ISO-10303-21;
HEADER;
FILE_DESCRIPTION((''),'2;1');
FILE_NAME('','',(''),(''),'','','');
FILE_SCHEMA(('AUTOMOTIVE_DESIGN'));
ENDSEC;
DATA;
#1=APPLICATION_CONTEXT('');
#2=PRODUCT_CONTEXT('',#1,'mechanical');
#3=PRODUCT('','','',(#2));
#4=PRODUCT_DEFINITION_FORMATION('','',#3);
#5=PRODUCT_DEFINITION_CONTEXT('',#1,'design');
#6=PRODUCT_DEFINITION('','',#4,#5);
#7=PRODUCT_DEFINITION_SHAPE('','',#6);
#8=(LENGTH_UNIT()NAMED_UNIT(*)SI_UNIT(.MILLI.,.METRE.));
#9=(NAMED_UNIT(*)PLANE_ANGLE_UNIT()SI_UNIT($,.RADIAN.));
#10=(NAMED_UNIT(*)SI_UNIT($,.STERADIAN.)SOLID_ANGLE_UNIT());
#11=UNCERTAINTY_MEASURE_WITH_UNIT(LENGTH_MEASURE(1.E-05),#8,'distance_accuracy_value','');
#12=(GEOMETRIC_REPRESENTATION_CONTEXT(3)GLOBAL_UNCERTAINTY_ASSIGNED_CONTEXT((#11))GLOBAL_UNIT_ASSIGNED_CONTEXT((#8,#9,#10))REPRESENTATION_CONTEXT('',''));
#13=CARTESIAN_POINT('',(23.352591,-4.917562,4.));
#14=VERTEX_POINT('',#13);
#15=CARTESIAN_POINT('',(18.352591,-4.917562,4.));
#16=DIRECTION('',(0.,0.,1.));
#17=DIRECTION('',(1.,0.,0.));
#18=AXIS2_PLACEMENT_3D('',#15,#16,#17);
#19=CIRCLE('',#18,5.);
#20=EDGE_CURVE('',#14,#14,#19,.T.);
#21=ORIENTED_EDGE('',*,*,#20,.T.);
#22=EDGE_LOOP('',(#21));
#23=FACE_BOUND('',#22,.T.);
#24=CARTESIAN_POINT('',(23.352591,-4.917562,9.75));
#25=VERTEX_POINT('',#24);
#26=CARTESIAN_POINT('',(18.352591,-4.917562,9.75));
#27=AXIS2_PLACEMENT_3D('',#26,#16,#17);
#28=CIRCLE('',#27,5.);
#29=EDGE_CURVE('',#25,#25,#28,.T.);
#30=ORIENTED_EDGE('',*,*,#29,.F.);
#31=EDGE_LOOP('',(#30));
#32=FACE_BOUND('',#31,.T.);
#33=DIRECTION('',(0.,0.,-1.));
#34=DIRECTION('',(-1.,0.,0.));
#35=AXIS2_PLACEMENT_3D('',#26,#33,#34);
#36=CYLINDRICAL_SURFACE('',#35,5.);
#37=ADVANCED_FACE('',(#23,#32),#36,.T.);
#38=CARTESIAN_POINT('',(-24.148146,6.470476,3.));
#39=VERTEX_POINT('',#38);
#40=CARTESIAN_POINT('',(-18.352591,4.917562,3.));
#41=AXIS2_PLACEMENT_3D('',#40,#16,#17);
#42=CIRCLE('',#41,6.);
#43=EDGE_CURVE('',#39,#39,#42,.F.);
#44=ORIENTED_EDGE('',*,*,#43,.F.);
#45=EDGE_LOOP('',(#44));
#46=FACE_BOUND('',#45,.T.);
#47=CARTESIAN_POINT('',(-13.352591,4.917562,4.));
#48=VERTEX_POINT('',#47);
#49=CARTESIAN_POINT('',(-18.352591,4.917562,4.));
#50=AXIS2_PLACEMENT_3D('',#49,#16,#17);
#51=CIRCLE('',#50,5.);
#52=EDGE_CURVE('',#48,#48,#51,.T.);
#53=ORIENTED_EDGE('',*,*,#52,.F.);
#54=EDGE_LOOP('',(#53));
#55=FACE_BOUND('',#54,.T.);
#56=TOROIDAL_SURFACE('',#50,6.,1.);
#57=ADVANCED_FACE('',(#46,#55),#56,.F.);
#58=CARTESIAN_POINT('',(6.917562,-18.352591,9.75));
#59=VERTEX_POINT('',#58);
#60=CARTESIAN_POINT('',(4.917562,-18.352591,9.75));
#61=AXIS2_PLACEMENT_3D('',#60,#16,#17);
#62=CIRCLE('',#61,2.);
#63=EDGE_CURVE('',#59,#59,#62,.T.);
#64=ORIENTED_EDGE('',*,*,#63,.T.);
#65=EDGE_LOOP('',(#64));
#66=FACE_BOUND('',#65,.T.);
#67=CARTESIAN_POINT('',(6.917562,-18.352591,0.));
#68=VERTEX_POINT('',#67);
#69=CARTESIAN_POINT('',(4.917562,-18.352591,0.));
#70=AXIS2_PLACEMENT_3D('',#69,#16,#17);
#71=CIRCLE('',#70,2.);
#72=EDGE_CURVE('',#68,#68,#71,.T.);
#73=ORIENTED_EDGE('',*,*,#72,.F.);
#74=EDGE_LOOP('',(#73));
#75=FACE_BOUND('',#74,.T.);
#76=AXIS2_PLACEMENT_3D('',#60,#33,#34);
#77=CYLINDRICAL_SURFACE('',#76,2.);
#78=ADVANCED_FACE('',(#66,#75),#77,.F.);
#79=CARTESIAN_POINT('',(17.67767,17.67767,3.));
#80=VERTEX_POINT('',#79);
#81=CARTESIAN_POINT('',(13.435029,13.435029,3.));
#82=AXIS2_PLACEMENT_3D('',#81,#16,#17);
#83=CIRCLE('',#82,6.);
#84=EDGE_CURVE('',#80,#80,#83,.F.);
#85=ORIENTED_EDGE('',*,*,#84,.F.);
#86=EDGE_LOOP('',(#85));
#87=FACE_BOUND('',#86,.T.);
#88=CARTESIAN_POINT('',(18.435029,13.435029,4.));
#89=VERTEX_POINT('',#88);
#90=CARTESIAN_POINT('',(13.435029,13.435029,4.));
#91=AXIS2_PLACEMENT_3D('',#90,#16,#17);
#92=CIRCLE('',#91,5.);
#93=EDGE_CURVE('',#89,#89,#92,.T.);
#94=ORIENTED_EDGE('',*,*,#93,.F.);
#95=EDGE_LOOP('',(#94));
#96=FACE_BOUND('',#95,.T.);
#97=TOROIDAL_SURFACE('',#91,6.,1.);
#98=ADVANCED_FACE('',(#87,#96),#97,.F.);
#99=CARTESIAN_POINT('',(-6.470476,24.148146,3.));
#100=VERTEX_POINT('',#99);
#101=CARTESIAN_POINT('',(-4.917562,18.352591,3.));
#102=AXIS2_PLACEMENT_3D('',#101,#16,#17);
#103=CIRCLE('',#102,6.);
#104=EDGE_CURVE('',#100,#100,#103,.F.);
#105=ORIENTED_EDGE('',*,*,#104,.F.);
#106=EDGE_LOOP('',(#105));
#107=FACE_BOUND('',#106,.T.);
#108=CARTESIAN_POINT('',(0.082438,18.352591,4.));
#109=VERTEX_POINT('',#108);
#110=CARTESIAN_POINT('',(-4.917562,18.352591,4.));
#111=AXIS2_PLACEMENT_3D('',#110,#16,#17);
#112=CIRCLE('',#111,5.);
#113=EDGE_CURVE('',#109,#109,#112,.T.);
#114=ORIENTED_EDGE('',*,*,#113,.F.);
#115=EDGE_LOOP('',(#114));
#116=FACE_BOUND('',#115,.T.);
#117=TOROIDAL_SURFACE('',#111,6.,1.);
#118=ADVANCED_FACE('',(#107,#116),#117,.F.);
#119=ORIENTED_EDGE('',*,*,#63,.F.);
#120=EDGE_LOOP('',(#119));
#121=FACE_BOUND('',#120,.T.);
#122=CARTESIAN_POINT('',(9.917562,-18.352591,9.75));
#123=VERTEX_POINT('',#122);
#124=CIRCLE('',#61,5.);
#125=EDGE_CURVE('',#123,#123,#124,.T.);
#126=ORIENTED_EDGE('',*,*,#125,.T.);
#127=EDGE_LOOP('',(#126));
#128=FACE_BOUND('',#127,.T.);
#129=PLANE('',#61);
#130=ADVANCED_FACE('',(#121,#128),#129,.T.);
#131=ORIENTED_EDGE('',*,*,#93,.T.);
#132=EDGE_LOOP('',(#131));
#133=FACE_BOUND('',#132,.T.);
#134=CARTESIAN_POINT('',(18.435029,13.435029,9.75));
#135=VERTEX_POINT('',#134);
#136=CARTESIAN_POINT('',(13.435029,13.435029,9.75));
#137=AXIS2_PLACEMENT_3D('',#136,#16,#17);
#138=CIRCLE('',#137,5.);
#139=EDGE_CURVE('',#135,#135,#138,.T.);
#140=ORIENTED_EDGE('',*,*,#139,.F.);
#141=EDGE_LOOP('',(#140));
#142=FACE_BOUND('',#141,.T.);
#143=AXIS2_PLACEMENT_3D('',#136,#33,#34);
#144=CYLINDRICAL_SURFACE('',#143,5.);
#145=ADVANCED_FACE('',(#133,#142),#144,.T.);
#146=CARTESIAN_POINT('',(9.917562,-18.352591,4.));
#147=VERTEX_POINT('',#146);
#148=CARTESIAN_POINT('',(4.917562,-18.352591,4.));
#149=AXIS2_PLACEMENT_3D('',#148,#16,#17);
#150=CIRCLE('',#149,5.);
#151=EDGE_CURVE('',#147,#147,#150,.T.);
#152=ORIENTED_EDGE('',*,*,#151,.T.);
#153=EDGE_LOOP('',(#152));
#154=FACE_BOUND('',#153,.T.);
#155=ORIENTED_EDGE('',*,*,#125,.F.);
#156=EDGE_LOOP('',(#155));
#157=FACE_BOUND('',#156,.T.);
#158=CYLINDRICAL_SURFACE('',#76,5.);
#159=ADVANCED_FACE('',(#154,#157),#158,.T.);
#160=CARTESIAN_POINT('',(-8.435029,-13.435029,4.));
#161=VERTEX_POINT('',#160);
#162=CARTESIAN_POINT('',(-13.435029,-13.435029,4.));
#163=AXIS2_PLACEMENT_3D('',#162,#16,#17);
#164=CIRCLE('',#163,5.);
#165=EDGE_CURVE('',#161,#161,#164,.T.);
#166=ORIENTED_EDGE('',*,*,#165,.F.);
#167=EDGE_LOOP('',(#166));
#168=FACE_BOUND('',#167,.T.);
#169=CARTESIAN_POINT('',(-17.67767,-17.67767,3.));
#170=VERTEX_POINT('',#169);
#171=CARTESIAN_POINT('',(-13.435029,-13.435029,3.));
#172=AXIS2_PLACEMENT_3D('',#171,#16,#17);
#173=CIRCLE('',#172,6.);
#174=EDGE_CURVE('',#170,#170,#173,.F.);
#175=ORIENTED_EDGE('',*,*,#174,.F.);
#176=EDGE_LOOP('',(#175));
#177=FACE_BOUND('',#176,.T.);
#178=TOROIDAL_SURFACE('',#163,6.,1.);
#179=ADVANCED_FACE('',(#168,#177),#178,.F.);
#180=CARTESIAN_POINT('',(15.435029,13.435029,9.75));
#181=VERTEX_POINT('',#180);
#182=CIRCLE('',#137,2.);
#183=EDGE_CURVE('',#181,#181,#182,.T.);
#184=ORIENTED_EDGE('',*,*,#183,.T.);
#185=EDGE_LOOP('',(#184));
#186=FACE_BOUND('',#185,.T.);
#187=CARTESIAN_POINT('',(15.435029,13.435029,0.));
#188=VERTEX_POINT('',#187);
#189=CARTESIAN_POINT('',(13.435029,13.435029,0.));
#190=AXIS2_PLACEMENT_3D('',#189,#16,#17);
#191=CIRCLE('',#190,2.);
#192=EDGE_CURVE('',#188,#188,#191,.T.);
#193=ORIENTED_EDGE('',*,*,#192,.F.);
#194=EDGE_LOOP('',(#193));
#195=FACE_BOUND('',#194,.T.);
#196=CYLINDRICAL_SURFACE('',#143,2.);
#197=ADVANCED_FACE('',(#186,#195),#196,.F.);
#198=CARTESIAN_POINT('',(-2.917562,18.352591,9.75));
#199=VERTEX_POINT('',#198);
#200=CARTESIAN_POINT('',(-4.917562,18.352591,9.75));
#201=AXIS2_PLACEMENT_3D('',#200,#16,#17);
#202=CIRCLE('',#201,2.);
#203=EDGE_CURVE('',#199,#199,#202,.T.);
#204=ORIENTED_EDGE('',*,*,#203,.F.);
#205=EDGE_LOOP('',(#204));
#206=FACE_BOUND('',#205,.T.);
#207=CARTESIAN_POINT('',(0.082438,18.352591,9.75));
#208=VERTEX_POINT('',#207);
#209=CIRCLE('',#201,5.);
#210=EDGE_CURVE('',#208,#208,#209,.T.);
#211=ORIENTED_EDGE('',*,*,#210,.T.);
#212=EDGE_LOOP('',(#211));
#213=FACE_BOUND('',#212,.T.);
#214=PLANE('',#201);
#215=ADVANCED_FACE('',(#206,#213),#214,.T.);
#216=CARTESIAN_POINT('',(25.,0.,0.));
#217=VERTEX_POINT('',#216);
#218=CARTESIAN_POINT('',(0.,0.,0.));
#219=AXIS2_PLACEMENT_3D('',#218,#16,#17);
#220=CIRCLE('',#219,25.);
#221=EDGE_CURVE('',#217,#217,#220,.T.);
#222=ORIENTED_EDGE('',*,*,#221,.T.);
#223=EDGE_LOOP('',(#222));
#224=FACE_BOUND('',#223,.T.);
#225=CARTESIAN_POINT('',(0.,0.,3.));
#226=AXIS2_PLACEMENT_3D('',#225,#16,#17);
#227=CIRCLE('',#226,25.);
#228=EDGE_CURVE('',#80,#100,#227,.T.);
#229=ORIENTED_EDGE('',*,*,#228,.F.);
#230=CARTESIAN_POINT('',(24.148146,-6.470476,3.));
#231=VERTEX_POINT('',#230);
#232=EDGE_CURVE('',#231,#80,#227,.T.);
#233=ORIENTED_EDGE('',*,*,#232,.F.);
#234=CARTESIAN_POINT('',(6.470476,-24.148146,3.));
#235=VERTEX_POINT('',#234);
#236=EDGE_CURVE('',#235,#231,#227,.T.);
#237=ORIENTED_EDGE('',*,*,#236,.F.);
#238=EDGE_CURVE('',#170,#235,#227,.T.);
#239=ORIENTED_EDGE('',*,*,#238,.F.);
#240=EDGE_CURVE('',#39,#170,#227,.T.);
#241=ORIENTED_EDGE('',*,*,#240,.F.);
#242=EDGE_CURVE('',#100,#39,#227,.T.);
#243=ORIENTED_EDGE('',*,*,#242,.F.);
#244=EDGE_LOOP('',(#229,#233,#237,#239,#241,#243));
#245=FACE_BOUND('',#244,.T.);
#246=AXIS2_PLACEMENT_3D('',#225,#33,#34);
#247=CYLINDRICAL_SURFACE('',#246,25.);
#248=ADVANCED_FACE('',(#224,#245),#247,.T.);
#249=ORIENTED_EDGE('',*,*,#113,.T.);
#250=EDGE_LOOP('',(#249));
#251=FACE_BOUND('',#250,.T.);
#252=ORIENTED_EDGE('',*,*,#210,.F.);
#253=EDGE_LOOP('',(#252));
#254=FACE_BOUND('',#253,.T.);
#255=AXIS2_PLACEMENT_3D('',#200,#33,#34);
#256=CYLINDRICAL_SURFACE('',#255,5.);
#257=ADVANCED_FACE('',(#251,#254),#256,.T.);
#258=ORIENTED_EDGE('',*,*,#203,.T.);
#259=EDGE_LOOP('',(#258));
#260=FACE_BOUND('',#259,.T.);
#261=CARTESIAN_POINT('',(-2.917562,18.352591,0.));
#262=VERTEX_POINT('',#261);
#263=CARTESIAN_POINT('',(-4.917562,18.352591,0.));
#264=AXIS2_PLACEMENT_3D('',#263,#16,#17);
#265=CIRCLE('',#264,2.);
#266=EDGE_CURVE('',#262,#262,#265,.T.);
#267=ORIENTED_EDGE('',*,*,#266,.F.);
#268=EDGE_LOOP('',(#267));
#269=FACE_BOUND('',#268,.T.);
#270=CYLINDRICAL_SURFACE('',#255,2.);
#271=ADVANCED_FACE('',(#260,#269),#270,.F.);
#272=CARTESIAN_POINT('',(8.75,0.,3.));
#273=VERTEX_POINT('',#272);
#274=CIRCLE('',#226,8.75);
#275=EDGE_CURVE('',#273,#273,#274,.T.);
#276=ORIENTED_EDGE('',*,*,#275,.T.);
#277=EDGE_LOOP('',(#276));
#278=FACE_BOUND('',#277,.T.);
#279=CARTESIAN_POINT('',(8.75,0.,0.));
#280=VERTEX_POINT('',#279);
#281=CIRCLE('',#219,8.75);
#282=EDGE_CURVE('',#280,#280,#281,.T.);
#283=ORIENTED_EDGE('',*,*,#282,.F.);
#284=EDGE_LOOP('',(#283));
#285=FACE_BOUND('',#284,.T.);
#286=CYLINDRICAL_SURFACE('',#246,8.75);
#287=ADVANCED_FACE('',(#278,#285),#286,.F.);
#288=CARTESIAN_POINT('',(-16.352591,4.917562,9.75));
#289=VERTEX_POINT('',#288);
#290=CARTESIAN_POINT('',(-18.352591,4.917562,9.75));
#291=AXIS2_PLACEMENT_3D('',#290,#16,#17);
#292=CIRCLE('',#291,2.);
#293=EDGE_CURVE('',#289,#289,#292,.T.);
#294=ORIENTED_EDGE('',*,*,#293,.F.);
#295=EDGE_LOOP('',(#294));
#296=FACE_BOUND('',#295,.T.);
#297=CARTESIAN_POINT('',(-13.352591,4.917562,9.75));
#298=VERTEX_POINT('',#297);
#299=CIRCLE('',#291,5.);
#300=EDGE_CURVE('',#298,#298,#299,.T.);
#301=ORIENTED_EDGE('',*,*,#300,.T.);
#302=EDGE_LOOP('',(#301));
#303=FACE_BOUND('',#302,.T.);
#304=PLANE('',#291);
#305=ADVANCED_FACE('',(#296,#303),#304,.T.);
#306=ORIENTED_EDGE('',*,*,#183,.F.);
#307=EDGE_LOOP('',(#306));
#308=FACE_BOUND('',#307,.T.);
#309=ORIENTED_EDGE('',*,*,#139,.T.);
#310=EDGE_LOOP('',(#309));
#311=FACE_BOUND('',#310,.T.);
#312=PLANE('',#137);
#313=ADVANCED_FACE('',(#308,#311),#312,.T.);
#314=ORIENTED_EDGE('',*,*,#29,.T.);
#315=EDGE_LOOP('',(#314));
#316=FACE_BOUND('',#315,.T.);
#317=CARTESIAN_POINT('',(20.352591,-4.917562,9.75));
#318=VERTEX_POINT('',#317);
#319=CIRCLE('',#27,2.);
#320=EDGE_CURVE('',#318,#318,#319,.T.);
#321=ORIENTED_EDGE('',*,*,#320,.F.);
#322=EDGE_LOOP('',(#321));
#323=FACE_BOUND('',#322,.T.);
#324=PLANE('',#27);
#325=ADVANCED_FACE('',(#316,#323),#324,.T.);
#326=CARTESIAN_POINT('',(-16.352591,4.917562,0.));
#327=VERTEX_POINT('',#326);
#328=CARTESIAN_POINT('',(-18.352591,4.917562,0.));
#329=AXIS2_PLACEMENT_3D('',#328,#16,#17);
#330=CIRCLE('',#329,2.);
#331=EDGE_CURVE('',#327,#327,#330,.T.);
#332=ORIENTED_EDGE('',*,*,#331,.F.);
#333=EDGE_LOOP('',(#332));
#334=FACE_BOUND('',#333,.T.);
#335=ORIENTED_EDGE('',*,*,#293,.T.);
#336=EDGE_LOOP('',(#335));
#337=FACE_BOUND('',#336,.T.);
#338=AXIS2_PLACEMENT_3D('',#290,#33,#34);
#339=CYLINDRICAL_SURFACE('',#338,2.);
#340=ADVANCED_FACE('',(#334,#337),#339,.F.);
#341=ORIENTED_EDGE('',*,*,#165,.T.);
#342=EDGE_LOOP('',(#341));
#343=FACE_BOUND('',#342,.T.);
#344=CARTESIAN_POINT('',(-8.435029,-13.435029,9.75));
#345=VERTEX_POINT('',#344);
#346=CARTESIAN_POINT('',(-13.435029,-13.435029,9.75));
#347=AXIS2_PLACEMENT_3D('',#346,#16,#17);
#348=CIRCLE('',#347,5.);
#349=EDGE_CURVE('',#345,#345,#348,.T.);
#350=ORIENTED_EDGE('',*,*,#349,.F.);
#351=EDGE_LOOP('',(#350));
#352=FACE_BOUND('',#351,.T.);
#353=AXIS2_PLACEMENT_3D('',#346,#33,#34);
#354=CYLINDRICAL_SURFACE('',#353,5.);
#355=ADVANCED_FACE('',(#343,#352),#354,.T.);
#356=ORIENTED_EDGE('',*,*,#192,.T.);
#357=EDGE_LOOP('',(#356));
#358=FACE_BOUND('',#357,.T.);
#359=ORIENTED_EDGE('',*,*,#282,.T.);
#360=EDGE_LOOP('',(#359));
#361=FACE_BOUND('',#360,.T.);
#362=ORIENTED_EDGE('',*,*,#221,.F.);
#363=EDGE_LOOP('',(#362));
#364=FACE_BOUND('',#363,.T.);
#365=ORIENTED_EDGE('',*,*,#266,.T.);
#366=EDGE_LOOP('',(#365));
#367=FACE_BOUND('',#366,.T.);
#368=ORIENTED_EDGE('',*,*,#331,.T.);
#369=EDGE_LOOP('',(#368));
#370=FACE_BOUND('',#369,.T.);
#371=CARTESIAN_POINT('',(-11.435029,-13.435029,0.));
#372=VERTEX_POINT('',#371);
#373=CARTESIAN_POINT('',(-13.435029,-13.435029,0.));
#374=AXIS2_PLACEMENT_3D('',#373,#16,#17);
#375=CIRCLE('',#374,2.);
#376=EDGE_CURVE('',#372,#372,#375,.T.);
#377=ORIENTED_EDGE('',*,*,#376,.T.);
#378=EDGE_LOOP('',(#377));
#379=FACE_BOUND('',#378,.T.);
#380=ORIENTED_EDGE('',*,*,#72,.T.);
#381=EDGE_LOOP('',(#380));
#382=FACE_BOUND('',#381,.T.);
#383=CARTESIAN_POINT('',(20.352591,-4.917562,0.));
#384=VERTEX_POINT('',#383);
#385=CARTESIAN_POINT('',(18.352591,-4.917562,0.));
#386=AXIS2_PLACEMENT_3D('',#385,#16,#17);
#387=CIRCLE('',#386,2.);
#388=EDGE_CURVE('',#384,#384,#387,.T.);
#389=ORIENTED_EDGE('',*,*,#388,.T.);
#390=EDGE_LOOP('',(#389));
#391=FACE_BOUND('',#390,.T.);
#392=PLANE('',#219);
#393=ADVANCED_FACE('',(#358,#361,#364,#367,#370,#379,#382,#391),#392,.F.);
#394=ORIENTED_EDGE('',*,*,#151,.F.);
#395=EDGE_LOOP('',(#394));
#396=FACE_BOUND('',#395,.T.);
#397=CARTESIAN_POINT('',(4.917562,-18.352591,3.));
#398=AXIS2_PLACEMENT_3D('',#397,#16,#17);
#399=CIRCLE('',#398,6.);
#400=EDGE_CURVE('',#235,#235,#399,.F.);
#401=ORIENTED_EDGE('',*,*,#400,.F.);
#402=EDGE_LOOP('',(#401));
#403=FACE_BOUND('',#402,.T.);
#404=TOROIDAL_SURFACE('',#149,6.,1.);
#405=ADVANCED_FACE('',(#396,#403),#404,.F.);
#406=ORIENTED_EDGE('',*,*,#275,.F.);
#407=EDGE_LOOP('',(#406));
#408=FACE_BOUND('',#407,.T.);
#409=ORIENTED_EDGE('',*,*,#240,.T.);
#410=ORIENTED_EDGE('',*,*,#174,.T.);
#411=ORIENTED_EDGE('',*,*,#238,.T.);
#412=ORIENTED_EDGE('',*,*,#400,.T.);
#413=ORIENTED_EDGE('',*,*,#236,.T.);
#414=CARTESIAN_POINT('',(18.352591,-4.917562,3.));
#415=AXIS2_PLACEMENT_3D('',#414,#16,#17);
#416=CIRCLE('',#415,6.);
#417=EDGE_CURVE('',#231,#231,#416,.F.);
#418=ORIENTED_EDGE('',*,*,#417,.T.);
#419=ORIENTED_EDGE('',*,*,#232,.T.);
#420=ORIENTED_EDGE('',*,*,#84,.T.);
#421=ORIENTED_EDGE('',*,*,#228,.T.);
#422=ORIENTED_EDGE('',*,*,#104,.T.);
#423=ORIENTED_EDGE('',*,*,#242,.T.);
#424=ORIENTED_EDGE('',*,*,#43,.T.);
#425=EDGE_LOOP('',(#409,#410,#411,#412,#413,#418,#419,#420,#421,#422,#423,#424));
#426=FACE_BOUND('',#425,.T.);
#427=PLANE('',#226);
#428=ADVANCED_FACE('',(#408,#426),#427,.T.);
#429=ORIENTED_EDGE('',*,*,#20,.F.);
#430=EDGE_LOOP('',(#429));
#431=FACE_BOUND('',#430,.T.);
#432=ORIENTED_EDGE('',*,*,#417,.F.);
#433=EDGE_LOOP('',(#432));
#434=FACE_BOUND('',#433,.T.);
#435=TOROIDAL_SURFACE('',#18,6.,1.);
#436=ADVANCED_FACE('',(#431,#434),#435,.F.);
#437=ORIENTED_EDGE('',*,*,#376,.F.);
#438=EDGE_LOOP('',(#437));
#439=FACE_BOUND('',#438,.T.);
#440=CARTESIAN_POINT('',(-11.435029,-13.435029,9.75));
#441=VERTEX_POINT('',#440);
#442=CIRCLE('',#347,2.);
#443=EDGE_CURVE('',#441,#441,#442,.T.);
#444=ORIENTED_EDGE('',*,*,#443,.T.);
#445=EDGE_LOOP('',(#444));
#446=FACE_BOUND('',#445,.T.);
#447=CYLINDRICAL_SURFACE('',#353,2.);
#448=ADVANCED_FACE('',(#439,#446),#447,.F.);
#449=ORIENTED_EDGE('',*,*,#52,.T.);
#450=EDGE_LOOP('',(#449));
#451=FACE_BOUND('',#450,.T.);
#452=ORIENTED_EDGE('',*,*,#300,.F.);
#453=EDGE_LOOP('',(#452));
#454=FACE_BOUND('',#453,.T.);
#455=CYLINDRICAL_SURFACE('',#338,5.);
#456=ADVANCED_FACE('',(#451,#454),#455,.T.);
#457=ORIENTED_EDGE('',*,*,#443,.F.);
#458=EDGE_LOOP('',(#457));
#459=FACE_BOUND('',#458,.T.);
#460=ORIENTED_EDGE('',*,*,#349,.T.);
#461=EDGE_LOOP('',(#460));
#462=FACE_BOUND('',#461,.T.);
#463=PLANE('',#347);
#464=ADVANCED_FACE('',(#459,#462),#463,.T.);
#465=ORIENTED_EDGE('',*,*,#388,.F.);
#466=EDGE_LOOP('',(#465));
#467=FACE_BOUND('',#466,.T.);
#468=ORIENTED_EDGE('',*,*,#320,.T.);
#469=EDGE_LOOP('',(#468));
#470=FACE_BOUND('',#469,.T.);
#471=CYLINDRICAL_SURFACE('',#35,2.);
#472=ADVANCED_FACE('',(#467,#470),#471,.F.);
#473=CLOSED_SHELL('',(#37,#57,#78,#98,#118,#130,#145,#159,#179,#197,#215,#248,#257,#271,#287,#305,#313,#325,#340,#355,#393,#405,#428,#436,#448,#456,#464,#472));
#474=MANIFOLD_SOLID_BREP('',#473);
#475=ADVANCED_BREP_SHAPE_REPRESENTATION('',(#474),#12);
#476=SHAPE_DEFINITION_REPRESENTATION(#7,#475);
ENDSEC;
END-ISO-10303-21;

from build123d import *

# Parameters (mm, degrees)
SKETCH1_R           = 25
SKETCH1_R_2         = 8.75
BOSS_EXTRUDE1_DEPTH = 3
SKETCH2_R           = 5
SKETCH2_R_2         = 2
BOSS_EXTRUDE2_DEPTH = 6.75
CUT_EXTRUDE1_START  = -6.75
SKETCH5_R           = 2
CUT_EXTRUDE1_DEPTH  = 6.75
FILLET4_R           = 1
FILLET5_R           = 1
FILLET6_R           = 1
FILLET7_R           = 1
FILLET8_R           = 1
FILLET9_R           = 1


with BuildPart() as part:
    # Sketch1 → Boss-Extrude1 (new body)
    with BuildSketch(Plane.XY):
        Circle(SKETCH1_R)
        Circle(SKETCH1_R_2, mode=Mode.SUBTRACT)
    extrude(amount=BOSS_EXTRUDE1_DEPTH)

    # Sketch2 → Boss-Extrude2 (add)
    # profile 1 of 6: a face of its own
    with BuildSketch(Plane.XY.offset(3)):
        with Locations((-4.917561857, 18.352590699)):
            Circle(SKETCH2_R)
        with Locations((-4.917561857, 18.352590699)):
            Circle(SKETCH2_R_2, mode=Mode.SUBTRACT)
    # profile 2 of 6: a face of its own
    with BuildSketch(Plane.XY.offset(3)):
        with Locations((-18.352590699, 4.917561857)):
            Circle(SKETCH2_R)
        with Locations((-18.352590699, 4.917561857)):
            Circle(SKETCH2_R_2, mode=Mode.SUBTRACT)
    # profile 3 of 6: a face of its own
    with BuildSketch(Plane.XY.offset(3)):
        with Locations((-13.435028843, -13.435028843)):
            Circle(SKETCH2_R)
        with Locations((-13.435028843, -13.435028843)):
            Circle(SKETCH2_R_2, mode=Mode.SUBTRACT)
    # profile 4 of 6: a face of its own
    with BuildSketch(Plane.XY.offset(3)):
        with Locations((4.917561857, -18.352590699)):
            Circle(SKETCH2_R)
        with Locations((4.917561857, -18.352590699)):
            Circle(SKETCH2_R_2, mode=Mode.SUBTRACT)
    # profile 5 of 6: a face of its own
    with BuildSketch(Plane.XY.offset(3)):
        with Locations((18.352590699, -4.917561857)):
            Circle(SKETCH2_R)
        with Locations((18.352590699, -4.917561857)):
            Circle(SKETCH2_R_2, mode=Mode.SUBTRACT)
    # profile 6 of 6: a face of its own
    with BuildSketch(Plane.XY.offset(3)):
        with Locations((13.435028843, 13.435028843)):
            Circle(SKETCH2_R)
        with Locations((13.435028843, 13.435028843)):
            Circle(SKETCH2_R_2, mode=Mode.SUBTRACT)
    extrude(amount=BOSS_EXTRUDE2_DEPTH)

    # Sketch5 → Cut-Extrude1 (cut)
    with BuildSketch(Plane.XY.offset(3).offset(CUT_EXTRUDE1_START)):
        with Locations((-18.352590699, 4.917561857)):
            Circle(SKETCH5_R)
        with Locations((-13.435028843, -13.435028843)):
            Circle(SKETCH5_R)
        with Locations((4.917561857, -18.352590699)):
            Circle(SKETCH5_R)
        with Locations((18.352590699, -4.917561857)):
            Circle(SKETCH5_R)
        with Locations((13.435028843, 13.435028843)):
            Circle(SKETCH5_R)
        with Locations((-4.917561857, 18.352590699)):
            Circle(SKETCH5_R)
    extrude(amount=CUT_EXTRUDE1_DEPTH, mode=Mode.SUBTRACT)

    # Fillet4
    fillet4_edges = [part.edges().sort_by_distance(p)[0] for p in [
        (-18.435028843, -13.435028843, 3),
    ]]
    fillet(fillet4_edges, radius=FILLET4_R - 0.0001)  # a hair under: the kernel refuses the full size

    # Fillet5
    fillet5_edges = [part.edges().sort_by_distance(p)[0] for p in [
        (-23.352590699, 4.917561857, 3),
    ]]
    fillet(fillet5_edges, radius=FILLET5_R - 0.0001)  # a hair under: the kernel refuses the full size

    # Fillet6
    fillet6_edges = [part.edges().sort_by_distance(p)[0] for p in [
        (-9.917561857, 18.352590699, 3),
    ]]
    fillet(fillet6_edges, radius=FILLET6_R - 0.0001)  # a hair under: the kernel refuses the full size

    # Fillet7
    fillet7_edges = [part.edges().sort_by_distance(p)[0] for p in [
        (8.435028843, 13.435028843, 3),
    ]]
    fillet(fillet7_edges, radius=FILLET7_R - 0.0001)  # a hair under: the kernel refuses the full size

    # Fillet8
    fillet8_edges = [part.edges().sort_by_distance(p)[0] for p in [
        (13.352590699, -4.917561857, 3),
    ]]
    fillet(fillet8_edges, radius=FILLET8_R - 0.0001)  # a hair under: the kernel refuses the full size

    # Fillet9
    fillet9_edges = [part.edges().sort_by_distance(p)[0] for p in [
        (-0.082438143, -18.352590699, 3),
    ]]
    fillet(fillet9_edges, radius=FILLET9_R - 0.0001)  # a hair under: the kernel refuses the full size


solid = part.part
